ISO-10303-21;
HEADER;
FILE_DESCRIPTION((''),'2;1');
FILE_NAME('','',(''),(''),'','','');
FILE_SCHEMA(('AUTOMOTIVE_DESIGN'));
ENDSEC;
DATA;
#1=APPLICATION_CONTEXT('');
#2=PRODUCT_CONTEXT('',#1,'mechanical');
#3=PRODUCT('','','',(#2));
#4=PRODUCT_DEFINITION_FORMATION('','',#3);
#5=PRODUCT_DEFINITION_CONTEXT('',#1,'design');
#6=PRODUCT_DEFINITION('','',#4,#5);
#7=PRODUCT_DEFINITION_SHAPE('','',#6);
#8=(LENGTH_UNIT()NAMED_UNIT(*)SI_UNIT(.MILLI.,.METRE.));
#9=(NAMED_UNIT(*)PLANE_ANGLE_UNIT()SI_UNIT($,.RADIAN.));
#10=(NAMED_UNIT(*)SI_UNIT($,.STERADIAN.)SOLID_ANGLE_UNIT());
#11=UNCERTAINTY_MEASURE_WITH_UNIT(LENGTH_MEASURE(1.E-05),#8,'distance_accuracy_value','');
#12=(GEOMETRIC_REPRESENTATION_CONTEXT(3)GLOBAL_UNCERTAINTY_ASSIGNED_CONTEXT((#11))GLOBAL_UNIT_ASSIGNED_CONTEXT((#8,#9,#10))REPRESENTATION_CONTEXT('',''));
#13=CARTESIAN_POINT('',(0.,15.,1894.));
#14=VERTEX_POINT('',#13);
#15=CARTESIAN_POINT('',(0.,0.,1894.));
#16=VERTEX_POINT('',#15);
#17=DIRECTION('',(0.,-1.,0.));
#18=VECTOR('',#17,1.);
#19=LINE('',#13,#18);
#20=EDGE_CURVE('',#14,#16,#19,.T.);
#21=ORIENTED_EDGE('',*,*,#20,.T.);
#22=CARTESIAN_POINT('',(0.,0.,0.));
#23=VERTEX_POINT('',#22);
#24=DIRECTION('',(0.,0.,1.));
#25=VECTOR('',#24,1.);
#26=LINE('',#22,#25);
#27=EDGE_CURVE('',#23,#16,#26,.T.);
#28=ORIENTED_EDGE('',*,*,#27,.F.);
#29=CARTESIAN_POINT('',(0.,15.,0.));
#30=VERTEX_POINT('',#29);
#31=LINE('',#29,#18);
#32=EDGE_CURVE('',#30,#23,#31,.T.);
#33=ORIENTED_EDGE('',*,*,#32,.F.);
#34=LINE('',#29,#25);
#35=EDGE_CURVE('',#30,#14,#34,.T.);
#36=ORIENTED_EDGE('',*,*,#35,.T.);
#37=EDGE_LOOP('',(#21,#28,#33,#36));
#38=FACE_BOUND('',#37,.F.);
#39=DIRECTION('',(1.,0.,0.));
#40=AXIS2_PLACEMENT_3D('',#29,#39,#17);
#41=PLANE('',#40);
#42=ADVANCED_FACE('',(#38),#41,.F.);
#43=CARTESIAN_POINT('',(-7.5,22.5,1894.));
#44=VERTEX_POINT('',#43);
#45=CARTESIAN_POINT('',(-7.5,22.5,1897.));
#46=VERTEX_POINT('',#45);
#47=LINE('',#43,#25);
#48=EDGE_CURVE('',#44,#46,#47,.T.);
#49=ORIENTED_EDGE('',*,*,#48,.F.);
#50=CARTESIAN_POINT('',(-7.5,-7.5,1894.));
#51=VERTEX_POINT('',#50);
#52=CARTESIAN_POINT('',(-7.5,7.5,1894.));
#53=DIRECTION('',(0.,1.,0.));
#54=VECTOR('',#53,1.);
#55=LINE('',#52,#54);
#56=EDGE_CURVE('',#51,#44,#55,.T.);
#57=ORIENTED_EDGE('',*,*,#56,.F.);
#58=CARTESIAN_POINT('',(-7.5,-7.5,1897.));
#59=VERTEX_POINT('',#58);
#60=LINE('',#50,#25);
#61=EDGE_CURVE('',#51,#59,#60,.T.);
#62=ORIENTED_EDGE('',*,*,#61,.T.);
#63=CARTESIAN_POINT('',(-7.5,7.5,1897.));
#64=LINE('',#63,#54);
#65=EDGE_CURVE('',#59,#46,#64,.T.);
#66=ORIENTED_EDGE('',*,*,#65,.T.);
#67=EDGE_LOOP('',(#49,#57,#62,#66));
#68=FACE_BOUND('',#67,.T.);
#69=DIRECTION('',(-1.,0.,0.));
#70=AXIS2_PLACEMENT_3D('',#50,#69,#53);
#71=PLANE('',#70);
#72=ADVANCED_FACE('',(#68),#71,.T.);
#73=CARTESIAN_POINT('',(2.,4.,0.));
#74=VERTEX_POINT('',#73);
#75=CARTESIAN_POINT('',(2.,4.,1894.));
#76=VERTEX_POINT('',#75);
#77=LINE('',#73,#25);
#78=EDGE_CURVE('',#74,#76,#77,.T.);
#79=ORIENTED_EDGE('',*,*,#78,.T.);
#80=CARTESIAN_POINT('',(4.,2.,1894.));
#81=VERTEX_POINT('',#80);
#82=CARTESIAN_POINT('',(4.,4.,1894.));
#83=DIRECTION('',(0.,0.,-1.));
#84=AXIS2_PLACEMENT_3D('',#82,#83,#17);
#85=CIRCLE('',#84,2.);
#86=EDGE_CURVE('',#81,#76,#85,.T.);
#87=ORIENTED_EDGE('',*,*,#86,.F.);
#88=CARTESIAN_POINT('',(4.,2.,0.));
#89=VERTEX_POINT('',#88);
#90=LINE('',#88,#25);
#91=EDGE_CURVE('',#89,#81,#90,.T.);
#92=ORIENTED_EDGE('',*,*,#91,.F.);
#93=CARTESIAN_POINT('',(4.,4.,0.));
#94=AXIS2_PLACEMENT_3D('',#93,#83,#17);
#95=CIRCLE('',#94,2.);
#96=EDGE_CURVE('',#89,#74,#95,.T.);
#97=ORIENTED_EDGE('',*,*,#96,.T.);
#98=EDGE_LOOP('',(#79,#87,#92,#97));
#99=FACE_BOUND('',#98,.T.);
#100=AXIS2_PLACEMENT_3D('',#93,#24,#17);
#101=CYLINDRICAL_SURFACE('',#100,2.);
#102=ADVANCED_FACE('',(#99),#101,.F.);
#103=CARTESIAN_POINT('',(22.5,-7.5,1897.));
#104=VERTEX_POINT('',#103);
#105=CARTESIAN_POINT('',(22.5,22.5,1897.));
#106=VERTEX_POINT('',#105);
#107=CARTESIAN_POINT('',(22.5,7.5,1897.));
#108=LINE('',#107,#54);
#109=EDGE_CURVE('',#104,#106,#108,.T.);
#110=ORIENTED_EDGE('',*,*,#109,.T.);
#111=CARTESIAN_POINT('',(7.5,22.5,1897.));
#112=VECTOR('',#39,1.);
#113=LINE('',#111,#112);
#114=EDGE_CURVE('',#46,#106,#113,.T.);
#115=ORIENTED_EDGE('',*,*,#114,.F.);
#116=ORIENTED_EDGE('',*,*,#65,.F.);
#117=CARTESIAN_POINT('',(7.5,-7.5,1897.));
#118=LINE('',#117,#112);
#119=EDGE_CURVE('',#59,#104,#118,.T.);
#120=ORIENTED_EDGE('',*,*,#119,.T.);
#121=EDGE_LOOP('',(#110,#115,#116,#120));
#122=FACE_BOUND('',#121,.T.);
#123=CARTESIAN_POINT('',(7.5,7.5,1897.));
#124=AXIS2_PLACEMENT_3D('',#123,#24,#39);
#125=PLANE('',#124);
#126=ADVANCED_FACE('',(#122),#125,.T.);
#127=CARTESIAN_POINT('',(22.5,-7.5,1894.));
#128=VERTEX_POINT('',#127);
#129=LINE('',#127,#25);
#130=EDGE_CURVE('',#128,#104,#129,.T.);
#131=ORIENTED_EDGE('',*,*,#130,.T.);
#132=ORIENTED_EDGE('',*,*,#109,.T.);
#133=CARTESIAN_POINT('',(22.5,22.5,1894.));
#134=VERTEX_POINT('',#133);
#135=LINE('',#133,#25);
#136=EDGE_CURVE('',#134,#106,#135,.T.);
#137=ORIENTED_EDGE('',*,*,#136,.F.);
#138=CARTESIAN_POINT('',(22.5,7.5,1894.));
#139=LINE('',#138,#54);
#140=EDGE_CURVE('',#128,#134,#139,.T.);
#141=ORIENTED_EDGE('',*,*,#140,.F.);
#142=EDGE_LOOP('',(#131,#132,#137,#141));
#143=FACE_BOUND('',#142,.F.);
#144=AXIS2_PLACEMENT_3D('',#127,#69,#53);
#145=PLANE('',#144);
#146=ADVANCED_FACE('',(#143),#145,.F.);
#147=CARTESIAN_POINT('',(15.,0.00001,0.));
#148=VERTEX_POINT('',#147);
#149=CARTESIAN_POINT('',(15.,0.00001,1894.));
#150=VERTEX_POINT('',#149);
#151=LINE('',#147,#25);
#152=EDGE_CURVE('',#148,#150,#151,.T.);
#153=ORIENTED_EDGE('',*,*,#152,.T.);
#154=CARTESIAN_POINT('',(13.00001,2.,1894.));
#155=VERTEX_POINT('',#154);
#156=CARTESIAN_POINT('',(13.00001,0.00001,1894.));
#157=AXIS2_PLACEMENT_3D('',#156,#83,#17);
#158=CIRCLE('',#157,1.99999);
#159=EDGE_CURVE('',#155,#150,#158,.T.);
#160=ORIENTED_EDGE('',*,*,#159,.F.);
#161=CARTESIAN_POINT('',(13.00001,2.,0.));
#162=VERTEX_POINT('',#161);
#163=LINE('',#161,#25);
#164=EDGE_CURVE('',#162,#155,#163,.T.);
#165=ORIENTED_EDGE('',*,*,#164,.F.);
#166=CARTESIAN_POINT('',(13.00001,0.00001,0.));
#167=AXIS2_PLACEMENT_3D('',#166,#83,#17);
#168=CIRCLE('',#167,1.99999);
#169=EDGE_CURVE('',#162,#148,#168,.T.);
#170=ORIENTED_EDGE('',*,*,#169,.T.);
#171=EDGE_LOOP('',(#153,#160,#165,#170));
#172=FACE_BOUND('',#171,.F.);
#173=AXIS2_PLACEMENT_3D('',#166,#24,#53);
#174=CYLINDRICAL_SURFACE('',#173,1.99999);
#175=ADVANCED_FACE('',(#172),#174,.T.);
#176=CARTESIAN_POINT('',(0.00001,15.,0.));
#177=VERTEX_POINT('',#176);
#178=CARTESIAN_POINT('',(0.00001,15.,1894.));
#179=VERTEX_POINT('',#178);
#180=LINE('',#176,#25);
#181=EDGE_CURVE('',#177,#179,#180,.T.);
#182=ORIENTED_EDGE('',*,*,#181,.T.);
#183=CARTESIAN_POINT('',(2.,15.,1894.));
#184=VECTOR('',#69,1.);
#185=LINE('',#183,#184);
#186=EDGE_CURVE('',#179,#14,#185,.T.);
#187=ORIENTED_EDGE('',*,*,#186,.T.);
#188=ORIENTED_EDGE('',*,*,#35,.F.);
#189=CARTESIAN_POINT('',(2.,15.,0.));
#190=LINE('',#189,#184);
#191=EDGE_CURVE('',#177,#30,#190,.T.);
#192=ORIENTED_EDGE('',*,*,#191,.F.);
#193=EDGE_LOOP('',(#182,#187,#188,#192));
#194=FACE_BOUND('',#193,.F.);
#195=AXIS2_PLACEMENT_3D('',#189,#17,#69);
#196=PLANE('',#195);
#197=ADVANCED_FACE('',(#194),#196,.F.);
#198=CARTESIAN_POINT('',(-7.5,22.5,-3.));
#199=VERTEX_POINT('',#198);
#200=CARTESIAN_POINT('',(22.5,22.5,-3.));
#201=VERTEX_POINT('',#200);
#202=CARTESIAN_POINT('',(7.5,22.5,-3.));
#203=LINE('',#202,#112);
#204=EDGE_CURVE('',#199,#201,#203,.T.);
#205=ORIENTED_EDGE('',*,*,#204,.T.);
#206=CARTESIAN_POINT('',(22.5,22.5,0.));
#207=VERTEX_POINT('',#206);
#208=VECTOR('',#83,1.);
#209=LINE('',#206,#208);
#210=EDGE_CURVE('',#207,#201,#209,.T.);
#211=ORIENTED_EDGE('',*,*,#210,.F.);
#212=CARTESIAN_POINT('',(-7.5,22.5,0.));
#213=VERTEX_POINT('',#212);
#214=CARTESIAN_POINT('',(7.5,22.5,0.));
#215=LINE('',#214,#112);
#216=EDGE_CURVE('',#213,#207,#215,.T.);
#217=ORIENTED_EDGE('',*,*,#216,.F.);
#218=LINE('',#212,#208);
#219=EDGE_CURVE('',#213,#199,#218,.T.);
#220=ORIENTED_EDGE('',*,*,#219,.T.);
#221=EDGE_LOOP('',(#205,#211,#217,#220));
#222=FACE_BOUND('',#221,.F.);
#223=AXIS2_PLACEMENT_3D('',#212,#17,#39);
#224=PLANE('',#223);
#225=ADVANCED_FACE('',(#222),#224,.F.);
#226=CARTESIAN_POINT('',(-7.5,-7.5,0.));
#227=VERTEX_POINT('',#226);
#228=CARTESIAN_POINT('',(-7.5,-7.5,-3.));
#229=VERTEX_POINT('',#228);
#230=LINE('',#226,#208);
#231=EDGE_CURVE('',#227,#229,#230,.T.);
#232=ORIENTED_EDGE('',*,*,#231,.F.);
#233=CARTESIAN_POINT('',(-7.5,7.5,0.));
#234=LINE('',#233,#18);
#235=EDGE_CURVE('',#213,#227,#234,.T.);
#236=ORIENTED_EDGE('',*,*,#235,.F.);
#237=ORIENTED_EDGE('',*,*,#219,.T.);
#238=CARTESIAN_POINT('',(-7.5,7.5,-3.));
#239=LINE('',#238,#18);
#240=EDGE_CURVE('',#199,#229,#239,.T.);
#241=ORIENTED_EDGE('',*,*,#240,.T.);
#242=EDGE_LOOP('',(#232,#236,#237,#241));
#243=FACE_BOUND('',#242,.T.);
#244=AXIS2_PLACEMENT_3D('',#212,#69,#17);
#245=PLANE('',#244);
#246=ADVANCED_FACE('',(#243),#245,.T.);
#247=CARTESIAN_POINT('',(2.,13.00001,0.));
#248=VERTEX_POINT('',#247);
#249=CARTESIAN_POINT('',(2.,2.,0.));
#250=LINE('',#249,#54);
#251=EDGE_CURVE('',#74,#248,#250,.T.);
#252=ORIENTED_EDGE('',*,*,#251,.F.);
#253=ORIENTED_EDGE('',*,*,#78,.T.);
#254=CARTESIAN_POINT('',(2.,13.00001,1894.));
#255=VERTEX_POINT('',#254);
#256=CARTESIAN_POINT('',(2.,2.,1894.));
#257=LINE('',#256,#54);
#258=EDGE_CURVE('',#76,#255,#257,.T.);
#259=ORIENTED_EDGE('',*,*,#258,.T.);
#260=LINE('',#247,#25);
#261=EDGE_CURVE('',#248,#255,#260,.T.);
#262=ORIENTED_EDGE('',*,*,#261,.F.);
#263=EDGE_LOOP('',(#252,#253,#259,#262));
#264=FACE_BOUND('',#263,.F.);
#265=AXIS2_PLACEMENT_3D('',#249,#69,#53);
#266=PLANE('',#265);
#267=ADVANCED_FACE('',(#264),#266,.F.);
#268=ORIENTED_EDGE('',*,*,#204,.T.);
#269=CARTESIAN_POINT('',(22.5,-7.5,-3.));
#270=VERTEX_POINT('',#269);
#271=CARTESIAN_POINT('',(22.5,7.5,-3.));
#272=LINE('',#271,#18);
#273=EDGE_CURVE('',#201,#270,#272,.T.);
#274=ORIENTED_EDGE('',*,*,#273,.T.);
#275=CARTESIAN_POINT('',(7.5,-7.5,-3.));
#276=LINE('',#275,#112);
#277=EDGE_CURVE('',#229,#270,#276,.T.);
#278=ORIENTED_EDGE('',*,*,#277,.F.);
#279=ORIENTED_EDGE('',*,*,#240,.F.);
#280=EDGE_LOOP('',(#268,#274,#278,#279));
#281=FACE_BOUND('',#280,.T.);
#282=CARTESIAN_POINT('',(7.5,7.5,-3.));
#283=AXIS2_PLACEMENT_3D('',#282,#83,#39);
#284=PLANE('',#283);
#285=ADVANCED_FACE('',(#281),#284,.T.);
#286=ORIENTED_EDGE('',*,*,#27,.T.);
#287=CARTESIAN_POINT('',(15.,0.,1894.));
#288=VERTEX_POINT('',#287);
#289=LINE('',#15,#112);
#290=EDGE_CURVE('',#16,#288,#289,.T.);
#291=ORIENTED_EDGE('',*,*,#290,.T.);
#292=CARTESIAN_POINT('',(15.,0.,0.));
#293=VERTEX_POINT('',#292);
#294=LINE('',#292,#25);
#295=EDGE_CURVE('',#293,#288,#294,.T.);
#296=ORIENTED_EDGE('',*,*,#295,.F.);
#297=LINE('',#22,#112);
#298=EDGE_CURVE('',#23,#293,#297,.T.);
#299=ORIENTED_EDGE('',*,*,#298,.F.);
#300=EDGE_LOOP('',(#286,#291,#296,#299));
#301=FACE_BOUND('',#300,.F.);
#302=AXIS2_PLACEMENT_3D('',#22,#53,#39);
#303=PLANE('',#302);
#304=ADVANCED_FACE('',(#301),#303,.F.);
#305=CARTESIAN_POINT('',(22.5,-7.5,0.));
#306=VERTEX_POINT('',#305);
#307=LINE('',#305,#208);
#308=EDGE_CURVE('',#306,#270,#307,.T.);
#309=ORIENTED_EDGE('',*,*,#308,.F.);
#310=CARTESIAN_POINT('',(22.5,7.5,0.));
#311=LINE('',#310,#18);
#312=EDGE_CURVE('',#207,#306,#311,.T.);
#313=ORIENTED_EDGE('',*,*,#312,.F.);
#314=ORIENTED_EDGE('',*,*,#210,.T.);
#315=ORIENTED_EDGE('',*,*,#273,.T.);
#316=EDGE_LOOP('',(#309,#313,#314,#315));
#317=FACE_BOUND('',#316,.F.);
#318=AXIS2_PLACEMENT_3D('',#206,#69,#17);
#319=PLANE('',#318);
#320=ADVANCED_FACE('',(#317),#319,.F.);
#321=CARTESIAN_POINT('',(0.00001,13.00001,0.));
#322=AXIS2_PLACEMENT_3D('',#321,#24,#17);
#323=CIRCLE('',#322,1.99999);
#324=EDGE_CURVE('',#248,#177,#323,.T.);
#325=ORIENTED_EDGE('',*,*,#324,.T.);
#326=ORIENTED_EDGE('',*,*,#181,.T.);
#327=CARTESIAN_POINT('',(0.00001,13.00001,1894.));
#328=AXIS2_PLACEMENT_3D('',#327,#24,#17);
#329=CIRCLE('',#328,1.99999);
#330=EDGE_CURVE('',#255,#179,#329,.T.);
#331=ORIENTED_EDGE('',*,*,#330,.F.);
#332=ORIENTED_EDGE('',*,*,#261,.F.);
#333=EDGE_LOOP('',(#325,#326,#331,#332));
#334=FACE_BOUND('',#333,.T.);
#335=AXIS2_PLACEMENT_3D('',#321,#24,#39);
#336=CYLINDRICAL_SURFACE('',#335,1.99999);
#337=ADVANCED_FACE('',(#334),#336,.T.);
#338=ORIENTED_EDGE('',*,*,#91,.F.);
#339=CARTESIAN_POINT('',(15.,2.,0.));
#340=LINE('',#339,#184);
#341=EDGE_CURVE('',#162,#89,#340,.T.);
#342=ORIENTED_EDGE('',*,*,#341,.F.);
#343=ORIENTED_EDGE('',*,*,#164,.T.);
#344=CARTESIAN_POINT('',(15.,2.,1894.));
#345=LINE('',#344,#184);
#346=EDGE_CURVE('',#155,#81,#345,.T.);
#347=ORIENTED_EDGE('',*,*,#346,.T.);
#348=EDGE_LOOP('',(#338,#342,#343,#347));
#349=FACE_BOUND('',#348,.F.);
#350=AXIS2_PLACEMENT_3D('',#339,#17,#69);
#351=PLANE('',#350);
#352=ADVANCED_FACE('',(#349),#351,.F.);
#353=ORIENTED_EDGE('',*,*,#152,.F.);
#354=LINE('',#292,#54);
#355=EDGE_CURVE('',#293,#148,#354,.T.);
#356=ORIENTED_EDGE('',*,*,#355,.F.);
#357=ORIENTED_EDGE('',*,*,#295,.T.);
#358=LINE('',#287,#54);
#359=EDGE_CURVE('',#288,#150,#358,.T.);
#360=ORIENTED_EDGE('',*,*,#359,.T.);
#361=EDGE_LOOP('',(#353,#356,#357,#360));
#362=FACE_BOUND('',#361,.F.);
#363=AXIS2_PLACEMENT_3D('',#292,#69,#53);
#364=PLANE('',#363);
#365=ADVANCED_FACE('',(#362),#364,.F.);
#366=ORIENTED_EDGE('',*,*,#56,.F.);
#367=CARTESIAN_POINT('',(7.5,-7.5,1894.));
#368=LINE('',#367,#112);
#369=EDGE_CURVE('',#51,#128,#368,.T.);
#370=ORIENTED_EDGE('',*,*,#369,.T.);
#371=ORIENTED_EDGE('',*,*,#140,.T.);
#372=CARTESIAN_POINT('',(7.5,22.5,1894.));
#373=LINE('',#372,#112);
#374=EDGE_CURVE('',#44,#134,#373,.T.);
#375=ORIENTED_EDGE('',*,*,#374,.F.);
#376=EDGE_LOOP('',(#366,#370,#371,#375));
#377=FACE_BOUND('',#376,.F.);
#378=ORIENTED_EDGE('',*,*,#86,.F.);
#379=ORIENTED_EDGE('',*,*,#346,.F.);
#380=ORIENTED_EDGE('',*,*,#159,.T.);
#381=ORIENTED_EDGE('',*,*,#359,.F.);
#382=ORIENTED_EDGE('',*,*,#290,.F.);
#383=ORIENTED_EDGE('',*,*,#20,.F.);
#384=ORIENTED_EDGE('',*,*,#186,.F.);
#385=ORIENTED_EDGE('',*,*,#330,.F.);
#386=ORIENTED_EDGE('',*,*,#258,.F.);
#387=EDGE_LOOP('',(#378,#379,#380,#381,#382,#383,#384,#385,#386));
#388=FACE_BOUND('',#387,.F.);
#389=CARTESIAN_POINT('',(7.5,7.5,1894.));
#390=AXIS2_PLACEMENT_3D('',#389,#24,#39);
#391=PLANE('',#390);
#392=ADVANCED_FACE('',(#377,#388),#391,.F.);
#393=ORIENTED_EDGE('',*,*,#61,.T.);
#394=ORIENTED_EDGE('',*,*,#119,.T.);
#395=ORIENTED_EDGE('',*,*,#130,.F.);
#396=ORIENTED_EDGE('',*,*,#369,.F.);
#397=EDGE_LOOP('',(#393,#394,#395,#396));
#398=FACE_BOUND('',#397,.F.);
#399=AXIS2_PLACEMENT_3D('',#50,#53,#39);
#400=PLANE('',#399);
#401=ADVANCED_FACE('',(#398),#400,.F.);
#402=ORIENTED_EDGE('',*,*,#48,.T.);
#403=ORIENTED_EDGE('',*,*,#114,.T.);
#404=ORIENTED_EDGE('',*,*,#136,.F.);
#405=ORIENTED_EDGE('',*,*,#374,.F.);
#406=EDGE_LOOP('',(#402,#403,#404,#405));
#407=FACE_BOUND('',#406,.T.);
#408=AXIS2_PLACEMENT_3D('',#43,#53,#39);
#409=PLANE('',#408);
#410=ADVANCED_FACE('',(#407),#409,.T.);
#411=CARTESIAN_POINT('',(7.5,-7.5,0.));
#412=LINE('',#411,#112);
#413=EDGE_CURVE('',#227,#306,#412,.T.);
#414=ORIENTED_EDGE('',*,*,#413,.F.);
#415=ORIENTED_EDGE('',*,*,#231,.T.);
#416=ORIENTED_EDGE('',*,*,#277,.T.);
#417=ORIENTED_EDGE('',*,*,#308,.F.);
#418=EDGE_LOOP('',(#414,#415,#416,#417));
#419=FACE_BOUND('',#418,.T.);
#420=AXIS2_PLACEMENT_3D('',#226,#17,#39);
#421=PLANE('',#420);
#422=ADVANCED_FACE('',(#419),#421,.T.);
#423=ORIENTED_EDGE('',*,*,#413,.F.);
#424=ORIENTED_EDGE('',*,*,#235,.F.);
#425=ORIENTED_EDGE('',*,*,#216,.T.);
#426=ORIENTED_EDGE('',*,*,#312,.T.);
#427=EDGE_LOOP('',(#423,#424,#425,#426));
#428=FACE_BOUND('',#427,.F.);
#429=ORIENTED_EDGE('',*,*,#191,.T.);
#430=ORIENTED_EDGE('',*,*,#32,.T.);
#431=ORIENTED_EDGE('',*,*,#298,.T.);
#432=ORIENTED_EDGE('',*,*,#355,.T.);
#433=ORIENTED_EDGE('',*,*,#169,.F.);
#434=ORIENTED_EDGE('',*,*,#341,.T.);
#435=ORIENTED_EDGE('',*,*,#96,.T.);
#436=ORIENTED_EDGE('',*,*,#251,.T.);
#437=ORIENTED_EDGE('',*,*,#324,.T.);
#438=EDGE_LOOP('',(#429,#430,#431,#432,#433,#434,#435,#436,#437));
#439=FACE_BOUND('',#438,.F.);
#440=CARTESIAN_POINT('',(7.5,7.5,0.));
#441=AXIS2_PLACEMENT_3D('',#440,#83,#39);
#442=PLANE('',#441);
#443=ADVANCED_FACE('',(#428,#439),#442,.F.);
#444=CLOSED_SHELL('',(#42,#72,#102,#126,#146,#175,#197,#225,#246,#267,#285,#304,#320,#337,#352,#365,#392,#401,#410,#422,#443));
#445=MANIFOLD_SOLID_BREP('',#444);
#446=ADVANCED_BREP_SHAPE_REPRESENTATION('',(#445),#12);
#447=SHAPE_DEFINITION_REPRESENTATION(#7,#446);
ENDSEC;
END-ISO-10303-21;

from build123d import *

# Parameters (mm, degrees)
F1_DEPTH = 1894
F2_R     = 2
F3_R     = 1.99999
F4_W     = 30
F4_H     = 30
F5_DEPTH = 3
F6_W     = 30
F6_H     = 30
F7_DEPTH = 3


# Not quite as in the source:
# - a fillet or chamfer is up to 0.001 mm smaller than in the source, because OpenCascade refuses the exact size


with BuildPart() as f1:
    # F0 (on Top) → F1 (new body)
    with BuildSketch(Plane.XY):
        Polygon((0, 15), (0, 0), (15, 0), (15, 2), (2, 2), (2, 15), align=None)
    extrude(amount=F1_DEPTH)

    # F2
    f2_edges = [f1.edges().sort_by_distance(p)[0] for p in [
        (2, 2, 947),
    ]]
    fillet(f2_edges, radius=F2_R)

    # F3 (radius 2 in the source; OpenCascade refuses exactly that, so slightly less here)
    f3_edges = [f1.edges().sort_by_distance(p)[0] for p in [
        (2, 15, 947),
        (15, 2, 947),
    ]]
    fillet(f3_edges, radius=F3_R)

    # F4 (on face) → F5 (join)
    with BuildSketch(Plane.XY.offset(1894)):
        with Locations((7.5, 7.5)):
            Rectangle(F4_W, F4_H)
    extrude(amount=F5_DEPTH)

    # F6 (on face) → F7 (join)
    with BuildSketch(Plane(origin=(0, 0, 0), x_dir=(1, 0, 0), z_dir=(0, 0, -1))):
        with Locations((7.5, -7.5)):
            Rectangle(F6_W, F6_H)
    extrude(amount=F7_DEPTH)


solid = f1.part
